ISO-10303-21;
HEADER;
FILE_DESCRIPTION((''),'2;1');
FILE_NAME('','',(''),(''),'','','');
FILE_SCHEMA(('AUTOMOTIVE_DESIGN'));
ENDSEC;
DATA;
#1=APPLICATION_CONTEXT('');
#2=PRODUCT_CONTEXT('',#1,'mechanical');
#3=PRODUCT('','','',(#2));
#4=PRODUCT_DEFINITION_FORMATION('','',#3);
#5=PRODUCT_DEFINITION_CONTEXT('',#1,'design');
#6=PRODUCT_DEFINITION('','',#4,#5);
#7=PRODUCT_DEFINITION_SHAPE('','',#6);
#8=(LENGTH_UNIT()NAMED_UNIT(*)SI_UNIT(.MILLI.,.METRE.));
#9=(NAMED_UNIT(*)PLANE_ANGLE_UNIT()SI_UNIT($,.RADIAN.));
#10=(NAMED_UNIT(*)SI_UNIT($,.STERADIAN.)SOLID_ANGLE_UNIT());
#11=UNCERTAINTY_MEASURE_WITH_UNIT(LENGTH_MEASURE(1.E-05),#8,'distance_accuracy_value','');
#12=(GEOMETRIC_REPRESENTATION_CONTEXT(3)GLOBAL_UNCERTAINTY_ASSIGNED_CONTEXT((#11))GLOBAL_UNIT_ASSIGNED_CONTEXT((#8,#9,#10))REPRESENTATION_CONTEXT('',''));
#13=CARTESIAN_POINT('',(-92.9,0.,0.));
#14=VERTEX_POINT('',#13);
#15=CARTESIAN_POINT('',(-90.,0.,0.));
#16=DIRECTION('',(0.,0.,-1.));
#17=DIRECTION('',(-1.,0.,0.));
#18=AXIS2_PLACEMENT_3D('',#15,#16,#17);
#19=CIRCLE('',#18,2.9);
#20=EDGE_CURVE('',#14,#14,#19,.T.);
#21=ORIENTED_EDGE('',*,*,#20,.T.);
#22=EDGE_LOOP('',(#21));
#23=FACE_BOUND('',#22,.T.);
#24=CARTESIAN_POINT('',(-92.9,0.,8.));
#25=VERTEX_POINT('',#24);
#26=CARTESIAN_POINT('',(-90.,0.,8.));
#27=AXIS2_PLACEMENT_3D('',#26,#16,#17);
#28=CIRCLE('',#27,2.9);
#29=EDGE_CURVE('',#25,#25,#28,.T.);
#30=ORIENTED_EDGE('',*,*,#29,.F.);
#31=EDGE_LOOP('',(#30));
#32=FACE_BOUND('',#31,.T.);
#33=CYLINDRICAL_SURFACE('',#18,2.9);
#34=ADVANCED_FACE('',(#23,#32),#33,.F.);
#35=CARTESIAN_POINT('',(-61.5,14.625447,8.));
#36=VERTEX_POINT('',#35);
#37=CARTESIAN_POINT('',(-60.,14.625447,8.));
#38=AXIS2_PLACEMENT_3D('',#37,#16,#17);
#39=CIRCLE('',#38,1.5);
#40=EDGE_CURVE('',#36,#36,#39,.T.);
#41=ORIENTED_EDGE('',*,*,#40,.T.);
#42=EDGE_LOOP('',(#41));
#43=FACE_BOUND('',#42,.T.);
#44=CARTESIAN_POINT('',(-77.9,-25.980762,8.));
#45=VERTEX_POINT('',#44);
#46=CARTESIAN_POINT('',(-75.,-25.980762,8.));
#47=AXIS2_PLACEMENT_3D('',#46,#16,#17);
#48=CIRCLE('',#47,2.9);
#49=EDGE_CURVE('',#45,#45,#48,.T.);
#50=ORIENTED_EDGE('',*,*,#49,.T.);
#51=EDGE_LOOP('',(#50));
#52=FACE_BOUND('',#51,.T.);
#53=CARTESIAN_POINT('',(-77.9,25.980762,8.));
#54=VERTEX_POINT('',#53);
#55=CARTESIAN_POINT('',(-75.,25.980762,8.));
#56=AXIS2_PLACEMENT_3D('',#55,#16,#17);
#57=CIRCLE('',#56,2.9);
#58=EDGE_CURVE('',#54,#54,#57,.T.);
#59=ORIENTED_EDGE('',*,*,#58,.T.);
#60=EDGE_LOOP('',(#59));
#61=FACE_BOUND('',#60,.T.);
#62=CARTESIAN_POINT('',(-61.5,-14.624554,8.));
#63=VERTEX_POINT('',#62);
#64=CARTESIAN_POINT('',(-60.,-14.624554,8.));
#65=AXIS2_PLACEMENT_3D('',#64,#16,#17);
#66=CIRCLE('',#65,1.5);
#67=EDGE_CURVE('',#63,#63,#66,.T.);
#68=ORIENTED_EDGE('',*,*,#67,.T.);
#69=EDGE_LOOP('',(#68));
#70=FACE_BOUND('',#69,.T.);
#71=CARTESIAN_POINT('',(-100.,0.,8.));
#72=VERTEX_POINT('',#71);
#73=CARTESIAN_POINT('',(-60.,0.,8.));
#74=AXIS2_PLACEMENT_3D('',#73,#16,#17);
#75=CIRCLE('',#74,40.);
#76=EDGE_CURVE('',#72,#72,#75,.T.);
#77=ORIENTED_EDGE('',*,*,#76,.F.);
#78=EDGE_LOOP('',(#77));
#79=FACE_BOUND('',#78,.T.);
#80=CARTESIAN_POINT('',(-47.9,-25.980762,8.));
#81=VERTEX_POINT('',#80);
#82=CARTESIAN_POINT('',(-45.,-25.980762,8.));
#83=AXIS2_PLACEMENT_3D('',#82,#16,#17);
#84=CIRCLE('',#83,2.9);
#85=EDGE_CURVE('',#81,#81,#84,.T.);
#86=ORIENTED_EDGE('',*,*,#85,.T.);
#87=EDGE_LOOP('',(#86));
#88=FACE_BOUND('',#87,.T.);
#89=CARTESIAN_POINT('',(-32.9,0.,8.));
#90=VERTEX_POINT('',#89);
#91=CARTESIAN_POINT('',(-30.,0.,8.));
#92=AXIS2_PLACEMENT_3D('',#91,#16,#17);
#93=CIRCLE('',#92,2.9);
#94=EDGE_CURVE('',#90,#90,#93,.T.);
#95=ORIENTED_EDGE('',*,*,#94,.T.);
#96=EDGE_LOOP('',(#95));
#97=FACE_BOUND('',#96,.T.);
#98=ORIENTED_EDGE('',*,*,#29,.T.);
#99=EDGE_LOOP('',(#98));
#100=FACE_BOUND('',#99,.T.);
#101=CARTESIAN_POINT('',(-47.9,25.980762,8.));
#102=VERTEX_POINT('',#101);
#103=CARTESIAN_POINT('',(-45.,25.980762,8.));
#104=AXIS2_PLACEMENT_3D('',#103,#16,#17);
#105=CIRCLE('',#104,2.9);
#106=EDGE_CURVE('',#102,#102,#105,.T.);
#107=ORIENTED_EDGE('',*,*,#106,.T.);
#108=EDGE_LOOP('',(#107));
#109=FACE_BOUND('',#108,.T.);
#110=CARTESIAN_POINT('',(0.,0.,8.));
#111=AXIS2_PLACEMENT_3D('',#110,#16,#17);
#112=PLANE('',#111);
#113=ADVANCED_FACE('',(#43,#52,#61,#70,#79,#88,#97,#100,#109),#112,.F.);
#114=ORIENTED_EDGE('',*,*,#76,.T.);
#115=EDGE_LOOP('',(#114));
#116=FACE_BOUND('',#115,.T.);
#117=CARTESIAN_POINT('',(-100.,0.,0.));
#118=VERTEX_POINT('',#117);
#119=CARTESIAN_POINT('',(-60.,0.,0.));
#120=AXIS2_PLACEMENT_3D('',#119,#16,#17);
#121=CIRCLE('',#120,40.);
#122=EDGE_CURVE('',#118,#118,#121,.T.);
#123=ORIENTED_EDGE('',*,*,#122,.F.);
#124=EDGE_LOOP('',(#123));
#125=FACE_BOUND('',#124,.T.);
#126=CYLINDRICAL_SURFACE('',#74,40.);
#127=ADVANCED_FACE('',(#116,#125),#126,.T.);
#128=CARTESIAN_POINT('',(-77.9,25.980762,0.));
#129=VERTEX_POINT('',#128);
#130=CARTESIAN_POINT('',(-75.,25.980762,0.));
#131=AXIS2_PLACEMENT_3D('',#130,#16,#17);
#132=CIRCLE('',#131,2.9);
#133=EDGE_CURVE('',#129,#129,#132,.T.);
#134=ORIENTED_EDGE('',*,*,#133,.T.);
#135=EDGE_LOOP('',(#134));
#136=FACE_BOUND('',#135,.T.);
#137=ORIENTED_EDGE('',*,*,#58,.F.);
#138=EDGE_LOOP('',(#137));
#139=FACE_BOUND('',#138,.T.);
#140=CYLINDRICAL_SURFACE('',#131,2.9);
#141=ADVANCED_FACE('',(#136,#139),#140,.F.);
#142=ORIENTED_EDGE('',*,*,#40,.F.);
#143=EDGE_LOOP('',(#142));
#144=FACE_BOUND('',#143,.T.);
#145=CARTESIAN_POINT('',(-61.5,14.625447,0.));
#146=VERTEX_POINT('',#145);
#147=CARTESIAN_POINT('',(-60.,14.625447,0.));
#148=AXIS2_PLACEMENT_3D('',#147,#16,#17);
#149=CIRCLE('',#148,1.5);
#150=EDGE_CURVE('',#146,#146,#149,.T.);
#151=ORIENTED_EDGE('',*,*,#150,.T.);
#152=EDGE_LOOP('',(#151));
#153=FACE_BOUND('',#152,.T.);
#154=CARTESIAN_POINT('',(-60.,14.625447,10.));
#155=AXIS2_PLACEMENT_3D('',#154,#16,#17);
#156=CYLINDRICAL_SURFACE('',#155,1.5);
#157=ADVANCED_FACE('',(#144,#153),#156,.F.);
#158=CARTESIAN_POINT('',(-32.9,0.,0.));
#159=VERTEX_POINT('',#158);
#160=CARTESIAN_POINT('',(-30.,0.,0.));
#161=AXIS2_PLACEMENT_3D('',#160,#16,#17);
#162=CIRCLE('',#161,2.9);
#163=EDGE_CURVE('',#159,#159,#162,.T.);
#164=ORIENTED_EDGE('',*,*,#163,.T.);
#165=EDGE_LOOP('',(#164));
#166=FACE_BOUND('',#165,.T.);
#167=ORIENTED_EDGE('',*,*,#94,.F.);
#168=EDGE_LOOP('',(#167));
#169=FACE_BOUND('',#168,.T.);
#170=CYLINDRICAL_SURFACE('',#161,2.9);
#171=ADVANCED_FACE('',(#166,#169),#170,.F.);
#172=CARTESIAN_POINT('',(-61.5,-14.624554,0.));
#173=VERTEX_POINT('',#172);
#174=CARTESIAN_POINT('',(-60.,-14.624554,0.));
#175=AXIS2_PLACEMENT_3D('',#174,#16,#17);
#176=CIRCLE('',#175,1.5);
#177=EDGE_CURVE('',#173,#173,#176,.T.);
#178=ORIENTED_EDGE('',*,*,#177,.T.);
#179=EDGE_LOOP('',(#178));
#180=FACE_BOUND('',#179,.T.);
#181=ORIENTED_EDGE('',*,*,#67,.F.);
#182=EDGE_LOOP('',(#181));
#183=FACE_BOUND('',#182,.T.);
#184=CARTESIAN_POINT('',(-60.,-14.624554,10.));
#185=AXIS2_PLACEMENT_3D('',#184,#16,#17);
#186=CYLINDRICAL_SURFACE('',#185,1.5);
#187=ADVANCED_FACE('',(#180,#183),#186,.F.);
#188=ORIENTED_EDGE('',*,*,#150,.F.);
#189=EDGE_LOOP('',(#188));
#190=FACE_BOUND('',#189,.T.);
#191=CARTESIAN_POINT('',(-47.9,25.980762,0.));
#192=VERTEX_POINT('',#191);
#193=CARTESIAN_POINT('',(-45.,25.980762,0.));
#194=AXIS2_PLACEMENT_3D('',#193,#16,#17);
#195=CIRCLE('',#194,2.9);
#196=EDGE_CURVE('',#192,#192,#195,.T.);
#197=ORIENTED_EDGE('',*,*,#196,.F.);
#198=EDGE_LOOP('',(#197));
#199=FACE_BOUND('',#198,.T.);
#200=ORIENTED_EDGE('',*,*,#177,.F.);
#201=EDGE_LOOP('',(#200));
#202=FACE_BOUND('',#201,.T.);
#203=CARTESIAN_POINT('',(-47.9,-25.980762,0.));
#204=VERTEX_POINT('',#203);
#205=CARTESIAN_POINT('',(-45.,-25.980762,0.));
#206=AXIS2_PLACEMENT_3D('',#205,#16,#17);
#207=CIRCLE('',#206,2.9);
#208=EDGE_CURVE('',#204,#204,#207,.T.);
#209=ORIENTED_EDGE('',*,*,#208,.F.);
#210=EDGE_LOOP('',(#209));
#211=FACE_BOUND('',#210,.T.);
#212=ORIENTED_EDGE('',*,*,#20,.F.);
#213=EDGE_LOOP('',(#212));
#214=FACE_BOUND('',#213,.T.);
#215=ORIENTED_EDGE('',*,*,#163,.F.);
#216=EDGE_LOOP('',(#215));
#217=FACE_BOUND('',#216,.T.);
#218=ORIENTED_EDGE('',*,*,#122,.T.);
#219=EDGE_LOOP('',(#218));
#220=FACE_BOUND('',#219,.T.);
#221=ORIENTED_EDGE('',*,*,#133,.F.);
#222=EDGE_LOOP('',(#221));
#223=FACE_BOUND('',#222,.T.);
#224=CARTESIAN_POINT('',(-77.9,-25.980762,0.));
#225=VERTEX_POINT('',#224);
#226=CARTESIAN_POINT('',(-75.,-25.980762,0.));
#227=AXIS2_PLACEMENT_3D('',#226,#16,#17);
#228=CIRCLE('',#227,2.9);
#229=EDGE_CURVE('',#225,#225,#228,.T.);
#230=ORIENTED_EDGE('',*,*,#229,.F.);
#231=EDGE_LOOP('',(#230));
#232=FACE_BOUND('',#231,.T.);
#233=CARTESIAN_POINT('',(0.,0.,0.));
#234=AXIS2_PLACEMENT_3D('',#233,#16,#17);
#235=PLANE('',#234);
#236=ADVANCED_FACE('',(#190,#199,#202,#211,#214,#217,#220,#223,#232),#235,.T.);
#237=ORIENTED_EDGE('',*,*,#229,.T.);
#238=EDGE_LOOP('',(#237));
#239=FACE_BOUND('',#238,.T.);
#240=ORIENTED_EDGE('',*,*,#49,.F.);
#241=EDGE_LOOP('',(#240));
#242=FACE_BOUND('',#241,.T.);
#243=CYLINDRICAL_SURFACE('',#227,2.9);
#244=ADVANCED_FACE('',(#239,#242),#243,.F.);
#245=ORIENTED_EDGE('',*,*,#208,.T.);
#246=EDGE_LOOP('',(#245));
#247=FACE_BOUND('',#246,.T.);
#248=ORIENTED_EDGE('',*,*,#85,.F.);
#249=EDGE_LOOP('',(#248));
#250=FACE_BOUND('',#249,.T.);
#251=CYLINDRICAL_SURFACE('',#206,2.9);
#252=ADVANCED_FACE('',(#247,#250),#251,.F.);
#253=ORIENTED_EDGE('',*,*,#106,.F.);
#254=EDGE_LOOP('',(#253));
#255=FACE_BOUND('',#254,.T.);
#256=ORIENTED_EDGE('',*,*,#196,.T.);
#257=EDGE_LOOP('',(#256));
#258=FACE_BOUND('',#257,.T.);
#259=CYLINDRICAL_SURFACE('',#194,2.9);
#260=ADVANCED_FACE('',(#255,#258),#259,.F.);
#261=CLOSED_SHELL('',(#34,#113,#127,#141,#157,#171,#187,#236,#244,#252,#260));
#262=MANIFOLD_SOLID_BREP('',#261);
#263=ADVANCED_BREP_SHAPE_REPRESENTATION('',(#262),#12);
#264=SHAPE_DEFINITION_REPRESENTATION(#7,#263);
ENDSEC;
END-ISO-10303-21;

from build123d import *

# Parameters (mm, degrees)
BOSS_EXTRU_1_DEPTH       = 8
ENL_V_START              = -10
ESQUISSE2_R              = 120
ENL_V_MAT_EXTRU_1_DEPTH  = 10
D_GAGEMENT_M51_OUTLINE_R = 2.9
D_GAGEMENT_M51_DEPTH     = 8
ESQUISSE5_R              = 1.5
ENL_V_MAT_EXTRU_2_DEPTH  = 10


# Read off the part's stored shape, not the designer's step: Dégagement M51
with BuildPart() as part:
    # Esquisse1 → Boss.-Extru.1 (new body)
    with BuildSketch(Plane.XY):
        with BuildLine():
            Line((-20, 56.568542495), (-73.333333333, 37.712361663))
            ThreePointArc((-73.333333333, 37.712361663), (-100, 0), (-73.333333333, -37.712361663))
            Line((-73.333333333, -37.712361663), (-20, -56.568542495))
            ThreePointArc((-20, -56.568542495), (34.641016151, -48.989794856), (60, 0))
            ThreePointArc((60, 0), (34.641016151, 48.989794856), (-20, 56.568542495))
        make_face()
    extrude(amount=BOSS_EXTRU_1_DEPTH)

    # Esquisse2 → Enlèv. mat.-Extru.1 (cut)
    with BuildSketch(Plane.XY.offset(8).offset(ENL_V_START)):
        with Locations((-60, 0)):
            Circle(ESQUISSE2_R)
        with BuildLine():
            ThreePointArc((-73.333333333, 37.712361663), (-100, 0), (-73.333333333, -37.712361663))
            ThreePointArc((-73.333333333, -37.712361663), (-20, 0), (-73.333333333, 37.712361663))
        make_face(mode=Mode.SUBTRACT)
    extrude(amount=ENL_V_MAT_EXTRU_1_DEPTH, mode=Mode.SUBTRACT)

    # Dégagement M51 outline → Dégagement M51 (cut)
    with BuildSketch(Plane.XY):
        with Locations((-90, 0)):
            Circle(D_GAGEMENT_M51_OUTLINE_R)
        with Locations((-75, -25.980762114)):
            Circle(D_GAGEMENT_M51_OUTLINE_R)
        with Locations((-45, -25.980762114)):
            Circle(D_GAGEMENT_M51_OUTLINE_R)
        with Locations((-30, 0)):
            Circle(D_GAGEMENT_M51_OUTLINE_R)
        with Locations((-45, 25.980762114)):
            Circle(D_GAGEMENT_M51_OUTLINE_R)
        with Locations((-75, 25.980762114)):
            Circle(D_GAGEMENT_M51_OUTLINE_R)
    extrude(amount=D_GAGEMENT_M51_DEPTH, mode=Mode.SUBTRACT)

    # Esquisse5 → Enlèv. mat.-Extru.2 (cut)
    with BuildSketch(Plane(origin=(819.686269666, 1346.410161514, 0), x_dir=(0, -1, 0), z_dir=(0, 0, -1))):
        with Locations(Location((1331.784714909, 879.686269666, 0), (0, 0, 90))):
            Circle(ESQUISSE5_R)
        with Locations(Location((1361.034715705, 879.686269666, 0), (0, 0, 90))):
            Circle(ESQUISSE5_R)
    extrude(amount=-ENL_V_MAT_EXTRU_2_DEPTH, mode=Mode.SUBTRACT)


solid = part.part
